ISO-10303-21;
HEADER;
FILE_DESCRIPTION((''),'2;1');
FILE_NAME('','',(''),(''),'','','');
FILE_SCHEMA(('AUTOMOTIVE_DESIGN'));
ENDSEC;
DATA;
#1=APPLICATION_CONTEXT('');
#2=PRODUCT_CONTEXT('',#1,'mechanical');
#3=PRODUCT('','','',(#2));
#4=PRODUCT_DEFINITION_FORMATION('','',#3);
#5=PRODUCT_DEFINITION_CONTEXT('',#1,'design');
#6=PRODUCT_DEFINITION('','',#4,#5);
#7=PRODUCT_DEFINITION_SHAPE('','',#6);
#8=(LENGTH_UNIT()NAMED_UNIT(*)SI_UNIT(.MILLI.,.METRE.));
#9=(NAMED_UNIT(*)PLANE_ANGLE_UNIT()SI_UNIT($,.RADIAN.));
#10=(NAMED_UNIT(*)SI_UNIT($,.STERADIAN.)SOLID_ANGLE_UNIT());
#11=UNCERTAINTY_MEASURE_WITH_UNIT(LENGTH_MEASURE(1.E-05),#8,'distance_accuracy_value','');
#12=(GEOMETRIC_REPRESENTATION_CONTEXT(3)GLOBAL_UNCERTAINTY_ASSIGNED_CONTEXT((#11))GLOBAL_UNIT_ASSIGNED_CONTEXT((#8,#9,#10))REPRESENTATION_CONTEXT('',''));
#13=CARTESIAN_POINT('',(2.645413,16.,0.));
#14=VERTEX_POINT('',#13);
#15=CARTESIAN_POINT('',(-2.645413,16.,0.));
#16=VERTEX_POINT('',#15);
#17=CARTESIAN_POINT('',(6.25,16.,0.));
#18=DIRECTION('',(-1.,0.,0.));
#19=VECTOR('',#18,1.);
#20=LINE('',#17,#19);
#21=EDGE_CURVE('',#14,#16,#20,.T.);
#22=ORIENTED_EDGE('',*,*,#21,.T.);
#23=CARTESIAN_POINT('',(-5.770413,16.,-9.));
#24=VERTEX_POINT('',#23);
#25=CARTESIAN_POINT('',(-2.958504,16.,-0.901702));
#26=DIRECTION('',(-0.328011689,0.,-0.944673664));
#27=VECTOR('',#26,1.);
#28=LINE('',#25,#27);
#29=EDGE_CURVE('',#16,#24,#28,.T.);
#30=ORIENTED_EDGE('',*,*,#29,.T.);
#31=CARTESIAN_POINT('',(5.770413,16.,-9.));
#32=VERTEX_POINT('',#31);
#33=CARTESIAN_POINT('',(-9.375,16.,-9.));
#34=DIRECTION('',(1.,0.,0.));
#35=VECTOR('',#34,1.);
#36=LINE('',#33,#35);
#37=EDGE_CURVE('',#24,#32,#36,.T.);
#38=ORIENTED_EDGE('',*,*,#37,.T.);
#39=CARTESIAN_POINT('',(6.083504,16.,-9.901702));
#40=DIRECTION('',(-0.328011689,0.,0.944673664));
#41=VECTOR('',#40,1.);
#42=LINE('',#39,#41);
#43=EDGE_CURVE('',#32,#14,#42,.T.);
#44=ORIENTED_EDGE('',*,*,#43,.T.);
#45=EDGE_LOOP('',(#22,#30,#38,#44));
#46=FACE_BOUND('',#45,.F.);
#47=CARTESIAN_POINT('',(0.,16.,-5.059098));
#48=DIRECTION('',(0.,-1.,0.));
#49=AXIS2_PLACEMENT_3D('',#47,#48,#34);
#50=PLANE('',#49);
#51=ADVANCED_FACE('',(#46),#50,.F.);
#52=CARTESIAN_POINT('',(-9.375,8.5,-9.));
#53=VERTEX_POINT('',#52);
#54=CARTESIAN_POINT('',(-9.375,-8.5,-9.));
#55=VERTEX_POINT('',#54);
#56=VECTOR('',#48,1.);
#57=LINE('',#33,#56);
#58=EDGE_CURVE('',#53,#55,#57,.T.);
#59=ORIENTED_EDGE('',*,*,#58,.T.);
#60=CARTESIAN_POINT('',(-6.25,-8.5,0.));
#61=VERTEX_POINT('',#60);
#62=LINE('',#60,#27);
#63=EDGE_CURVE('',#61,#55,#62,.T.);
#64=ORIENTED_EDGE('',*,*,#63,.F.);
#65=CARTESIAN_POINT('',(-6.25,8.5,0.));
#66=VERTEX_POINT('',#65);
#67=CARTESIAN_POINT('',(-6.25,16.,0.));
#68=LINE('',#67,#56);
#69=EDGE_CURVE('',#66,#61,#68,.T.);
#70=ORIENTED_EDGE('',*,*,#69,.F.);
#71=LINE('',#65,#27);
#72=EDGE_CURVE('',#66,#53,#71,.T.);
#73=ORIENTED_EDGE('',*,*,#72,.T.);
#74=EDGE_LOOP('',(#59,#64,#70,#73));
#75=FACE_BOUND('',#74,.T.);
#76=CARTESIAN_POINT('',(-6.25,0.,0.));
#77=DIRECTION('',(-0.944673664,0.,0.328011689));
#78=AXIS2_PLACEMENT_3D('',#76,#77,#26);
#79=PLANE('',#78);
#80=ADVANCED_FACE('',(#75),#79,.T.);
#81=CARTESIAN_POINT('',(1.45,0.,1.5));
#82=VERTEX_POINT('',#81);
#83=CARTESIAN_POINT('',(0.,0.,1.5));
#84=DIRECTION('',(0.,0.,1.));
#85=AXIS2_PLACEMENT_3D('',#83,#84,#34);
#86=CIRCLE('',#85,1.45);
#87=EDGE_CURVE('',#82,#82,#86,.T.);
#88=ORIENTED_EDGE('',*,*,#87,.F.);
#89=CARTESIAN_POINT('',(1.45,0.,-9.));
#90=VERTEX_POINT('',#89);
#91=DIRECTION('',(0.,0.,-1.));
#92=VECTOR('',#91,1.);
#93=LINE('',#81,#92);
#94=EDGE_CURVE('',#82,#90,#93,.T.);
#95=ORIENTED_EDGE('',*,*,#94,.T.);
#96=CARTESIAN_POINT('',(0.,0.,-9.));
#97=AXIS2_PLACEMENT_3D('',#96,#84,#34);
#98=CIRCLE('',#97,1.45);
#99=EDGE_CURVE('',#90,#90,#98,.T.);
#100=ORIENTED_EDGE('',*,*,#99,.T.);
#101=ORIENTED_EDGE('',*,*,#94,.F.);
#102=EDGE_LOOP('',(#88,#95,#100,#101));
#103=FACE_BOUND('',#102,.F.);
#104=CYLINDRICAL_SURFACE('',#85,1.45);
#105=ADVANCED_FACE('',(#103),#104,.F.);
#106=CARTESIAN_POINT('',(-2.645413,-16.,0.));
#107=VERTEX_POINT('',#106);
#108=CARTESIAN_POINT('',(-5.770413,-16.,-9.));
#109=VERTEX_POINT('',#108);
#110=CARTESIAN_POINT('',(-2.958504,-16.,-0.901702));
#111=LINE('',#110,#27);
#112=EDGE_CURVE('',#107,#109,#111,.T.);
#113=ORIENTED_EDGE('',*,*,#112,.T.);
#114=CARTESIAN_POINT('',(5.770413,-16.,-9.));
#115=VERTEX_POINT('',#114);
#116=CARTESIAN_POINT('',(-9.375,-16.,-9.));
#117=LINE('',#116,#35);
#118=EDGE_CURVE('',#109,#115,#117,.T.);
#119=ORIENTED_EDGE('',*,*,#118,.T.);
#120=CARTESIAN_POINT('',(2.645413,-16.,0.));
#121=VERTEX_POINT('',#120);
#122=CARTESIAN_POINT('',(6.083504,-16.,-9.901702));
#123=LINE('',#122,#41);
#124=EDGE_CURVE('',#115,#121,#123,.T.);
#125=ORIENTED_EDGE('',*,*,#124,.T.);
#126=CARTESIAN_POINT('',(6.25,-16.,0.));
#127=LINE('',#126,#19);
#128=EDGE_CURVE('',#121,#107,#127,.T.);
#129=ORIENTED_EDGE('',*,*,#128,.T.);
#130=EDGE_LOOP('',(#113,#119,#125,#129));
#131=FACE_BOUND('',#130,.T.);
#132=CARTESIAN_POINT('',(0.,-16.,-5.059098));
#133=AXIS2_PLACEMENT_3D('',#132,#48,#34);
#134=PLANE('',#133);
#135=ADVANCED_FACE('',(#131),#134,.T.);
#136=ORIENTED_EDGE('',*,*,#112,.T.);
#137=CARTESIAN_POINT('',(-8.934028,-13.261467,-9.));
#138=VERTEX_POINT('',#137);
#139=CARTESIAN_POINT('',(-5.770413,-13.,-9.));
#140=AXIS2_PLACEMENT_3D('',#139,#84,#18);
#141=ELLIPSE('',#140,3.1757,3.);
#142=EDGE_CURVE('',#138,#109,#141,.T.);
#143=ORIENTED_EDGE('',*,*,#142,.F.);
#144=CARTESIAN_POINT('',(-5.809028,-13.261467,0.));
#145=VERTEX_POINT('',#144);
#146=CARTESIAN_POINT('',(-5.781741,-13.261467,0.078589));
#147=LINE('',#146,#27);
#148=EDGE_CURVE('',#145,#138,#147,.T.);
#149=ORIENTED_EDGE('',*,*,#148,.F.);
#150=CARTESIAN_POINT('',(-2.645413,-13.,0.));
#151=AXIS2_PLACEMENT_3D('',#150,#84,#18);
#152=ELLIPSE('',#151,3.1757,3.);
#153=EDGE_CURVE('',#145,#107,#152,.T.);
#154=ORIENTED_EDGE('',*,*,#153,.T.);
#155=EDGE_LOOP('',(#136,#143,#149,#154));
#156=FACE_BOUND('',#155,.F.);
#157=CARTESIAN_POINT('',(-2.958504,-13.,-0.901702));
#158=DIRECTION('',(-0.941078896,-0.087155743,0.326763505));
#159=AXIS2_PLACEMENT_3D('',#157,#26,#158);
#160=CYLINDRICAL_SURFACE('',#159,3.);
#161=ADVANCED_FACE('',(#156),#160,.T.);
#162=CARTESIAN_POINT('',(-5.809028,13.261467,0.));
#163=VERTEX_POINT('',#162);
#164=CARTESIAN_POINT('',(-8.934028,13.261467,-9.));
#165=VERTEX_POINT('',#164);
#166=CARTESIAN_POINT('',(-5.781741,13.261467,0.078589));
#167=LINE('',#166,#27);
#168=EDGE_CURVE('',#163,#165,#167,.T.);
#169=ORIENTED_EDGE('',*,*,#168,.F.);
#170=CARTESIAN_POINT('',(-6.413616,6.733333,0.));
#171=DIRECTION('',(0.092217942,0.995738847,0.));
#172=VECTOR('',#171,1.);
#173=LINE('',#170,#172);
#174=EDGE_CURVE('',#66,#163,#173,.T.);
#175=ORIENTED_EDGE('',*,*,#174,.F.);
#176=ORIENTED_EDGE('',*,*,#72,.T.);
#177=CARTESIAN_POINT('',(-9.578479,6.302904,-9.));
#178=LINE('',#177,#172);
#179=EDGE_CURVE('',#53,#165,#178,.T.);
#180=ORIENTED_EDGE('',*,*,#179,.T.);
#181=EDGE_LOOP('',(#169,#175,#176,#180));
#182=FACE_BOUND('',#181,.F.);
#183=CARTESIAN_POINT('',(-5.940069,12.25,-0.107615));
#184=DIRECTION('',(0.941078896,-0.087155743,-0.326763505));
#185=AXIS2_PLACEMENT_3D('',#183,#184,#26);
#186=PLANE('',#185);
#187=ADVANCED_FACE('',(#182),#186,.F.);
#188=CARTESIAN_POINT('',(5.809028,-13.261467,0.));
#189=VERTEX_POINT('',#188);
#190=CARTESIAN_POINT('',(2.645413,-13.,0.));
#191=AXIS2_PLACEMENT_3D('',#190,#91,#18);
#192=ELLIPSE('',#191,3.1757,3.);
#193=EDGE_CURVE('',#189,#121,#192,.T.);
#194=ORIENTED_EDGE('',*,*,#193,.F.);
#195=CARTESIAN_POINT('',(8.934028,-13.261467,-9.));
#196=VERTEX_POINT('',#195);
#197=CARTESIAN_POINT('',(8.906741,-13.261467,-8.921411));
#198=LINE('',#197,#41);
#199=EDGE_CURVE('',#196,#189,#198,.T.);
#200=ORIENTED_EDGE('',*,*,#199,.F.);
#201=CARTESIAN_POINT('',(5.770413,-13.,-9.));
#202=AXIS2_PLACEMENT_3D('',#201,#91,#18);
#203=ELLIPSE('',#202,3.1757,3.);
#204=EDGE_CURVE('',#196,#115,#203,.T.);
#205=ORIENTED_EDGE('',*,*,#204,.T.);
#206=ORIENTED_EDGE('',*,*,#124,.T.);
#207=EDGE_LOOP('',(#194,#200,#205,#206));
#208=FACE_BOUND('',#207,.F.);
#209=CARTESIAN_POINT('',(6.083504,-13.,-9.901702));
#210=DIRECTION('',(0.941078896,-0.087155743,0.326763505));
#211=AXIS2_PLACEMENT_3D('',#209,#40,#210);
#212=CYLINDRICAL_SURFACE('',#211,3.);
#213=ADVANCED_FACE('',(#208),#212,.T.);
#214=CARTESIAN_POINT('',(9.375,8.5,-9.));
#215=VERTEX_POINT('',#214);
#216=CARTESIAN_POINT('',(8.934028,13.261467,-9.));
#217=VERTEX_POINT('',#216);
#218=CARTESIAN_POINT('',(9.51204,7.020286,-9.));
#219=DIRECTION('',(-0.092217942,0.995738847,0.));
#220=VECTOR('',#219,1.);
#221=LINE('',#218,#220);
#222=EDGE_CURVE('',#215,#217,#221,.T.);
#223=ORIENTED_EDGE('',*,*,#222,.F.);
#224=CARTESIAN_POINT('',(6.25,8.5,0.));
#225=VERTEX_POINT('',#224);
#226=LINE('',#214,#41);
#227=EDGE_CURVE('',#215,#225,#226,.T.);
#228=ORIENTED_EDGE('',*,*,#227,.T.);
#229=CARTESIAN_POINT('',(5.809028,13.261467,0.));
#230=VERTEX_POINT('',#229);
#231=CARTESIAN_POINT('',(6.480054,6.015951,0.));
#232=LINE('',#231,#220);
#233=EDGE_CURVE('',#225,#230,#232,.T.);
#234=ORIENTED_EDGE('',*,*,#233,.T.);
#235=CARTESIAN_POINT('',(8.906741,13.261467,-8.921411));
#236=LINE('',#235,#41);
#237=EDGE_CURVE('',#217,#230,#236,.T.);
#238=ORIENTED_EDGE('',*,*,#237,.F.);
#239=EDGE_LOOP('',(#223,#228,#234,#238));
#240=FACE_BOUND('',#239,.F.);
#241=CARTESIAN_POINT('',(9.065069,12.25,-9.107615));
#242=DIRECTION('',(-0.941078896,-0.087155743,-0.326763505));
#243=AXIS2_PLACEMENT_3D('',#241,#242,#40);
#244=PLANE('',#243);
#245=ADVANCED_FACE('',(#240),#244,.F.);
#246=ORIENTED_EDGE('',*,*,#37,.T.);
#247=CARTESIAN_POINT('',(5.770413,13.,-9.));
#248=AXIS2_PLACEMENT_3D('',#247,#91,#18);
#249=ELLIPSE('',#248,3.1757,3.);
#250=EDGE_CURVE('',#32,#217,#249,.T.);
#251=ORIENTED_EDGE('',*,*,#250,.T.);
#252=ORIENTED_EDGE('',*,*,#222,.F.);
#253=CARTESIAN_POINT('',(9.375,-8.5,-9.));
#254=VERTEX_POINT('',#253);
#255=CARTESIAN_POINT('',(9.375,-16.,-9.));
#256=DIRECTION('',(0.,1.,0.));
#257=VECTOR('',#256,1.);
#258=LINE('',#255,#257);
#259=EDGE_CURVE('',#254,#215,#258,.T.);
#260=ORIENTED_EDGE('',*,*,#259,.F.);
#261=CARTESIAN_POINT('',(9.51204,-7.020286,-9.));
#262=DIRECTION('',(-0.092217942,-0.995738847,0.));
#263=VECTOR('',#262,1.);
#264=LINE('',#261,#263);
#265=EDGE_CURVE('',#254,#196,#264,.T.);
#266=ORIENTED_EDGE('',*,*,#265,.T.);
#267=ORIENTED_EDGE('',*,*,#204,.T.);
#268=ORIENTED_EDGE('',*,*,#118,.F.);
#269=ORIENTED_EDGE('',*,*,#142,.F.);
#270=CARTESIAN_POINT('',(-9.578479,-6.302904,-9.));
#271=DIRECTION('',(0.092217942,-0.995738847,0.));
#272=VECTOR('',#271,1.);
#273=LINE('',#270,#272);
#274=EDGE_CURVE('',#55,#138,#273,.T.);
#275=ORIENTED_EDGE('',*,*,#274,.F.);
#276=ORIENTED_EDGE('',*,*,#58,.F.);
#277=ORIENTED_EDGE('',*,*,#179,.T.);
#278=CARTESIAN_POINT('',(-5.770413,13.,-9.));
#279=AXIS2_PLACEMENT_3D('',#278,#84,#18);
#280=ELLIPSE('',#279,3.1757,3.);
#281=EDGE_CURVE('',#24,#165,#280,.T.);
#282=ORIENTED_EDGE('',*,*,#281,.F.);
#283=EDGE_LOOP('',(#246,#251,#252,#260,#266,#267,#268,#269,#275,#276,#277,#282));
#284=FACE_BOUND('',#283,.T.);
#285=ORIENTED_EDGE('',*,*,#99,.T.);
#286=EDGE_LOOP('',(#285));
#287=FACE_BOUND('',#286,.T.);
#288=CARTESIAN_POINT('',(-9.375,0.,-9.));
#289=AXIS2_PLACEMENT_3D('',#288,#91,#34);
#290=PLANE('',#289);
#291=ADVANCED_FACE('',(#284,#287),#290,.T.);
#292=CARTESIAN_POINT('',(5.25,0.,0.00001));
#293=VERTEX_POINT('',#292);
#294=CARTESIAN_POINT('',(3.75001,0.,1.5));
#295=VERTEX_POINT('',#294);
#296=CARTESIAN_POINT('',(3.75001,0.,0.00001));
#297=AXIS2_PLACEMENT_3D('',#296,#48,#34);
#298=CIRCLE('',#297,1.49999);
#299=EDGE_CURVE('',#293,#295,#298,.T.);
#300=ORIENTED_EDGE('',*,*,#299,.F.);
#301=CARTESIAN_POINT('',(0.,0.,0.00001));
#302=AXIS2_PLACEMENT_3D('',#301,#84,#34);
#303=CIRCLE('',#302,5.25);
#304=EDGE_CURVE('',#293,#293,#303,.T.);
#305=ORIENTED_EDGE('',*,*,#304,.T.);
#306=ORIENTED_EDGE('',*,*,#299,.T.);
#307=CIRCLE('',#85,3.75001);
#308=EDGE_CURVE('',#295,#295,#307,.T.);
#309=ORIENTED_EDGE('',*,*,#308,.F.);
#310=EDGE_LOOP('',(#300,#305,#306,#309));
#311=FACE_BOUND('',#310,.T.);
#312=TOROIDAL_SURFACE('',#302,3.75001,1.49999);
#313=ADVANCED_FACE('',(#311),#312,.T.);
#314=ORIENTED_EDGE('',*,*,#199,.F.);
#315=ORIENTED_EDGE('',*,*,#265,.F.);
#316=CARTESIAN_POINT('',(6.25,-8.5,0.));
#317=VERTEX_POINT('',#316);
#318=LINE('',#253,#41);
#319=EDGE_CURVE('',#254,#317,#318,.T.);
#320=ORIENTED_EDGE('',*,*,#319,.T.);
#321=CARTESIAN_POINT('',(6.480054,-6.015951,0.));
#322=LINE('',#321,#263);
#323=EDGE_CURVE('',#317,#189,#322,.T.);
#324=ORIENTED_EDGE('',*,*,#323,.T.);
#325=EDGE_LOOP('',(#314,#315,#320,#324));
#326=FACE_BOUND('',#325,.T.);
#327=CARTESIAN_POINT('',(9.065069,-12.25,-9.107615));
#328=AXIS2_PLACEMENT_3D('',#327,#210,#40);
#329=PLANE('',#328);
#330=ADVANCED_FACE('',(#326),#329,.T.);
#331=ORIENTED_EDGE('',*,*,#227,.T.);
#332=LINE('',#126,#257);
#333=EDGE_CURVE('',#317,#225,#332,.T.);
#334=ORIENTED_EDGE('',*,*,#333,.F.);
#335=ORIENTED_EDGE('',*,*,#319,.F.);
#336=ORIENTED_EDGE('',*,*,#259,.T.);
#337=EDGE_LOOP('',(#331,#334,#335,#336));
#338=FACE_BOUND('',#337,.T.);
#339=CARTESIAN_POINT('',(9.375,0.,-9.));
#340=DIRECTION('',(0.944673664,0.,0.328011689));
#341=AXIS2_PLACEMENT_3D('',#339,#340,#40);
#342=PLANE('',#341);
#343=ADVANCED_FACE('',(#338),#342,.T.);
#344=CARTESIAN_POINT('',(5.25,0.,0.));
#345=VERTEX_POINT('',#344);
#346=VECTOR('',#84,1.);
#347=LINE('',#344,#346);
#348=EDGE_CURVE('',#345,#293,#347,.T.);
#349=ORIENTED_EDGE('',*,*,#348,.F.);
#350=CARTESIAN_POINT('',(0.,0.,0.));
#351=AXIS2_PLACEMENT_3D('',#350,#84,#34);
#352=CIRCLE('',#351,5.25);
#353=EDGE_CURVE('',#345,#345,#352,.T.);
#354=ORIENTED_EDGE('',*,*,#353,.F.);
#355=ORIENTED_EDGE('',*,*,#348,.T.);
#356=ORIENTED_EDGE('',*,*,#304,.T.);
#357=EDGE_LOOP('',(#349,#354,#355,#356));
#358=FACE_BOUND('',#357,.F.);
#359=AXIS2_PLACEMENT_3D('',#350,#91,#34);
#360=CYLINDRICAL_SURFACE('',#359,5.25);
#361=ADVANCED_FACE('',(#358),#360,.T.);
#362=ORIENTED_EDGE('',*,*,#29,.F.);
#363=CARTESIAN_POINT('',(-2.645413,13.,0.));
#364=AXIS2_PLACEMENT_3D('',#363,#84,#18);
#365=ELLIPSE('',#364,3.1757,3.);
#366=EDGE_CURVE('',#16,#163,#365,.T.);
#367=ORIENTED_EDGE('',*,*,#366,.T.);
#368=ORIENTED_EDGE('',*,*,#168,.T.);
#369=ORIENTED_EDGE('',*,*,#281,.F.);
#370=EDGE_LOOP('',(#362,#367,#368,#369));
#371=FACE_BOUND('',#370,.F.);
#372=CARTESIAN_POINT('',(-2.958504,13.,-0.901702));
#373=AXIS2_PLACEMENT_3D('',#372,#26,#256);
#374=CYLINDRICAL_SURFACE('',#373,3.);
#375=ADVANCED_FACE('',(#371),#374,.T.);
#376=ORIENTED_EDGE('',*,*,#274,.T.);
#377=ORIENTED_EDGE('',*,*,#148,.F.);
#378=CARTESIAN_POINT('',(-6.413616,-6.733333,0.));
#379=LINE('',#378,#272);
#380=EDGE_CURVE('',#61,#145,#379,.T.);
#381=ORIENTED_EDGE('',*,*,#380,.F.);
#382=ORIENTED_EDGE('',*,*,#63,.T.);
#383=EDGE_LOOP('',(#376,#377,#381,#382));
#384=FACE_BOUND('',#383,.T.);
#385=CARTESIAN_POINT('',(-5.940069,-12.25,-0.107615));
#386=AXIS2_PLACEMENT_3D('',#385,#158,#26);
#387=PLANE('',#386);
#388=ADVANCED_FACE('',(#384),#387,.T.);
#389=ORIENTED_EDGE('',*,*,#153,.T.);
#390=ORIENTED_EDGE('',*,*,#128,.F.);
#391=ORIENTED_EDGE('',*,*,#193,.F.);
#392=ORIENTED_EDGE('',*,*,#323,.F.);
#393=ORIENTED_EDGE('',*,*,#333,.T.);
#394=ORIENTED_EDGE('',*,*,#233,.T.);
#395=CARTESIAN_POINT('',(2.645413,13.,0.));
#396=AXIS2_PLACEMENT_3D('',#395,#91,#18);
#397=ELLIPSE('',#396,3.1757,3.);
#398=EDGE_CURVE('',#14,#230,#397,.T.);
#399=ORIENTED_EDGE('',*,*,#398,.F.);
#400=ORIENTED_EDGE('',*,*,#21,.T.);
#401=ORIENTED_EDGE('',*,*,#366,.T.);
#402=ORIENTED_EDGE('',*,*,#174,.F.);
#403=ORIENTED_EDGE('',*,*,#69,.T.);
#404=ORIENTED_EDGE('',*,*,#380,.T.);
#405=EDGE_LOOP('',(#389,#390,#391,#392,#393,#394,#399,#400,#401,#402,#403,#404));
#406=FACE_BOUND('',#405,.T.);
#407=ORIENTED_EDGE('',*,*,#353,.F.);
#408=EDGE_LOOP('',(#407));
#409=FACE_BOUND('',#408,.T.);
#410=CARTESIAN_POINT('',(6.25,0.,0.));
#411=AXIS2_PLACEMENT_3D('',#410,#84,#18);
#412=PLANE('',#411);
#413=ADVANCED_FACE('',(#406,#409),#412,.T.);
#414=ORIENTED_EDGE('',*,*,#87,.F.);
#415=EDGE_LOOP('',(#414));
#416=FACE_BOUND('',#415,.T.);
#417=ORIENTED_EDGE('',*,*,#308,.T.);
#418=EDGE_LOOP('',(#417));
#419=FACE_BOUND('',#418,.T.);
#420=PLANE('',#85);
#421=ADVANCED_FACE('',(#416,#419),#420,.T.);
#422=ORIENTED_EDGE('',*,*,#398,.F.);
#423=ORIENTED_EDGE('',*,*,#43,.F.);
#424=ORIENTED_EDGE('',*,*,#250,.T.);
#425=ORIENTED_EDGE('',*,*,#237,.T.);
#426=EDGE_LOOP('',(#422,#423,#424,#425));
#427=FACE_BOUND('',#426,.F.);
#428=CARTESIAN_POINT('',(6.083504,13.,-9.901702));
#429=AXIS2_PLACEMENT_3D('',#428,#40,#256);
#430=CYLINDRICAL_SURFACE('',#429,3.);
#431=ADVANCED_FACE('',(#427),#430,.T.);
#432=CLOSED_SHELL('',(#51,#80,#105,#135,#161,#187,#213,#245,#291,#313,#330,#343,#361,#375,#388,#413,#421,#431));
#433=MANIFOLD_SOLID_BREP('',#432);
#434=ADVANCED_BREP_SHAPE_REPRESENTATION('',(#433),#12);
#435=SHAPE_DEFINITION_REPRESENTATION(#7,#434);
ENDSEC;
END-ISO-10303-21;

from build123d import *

# Parameters (mm, degrees)
F1_DEPTH   = 16
F2_R       = 5.25
F3_DEPTH   = 1.5
F4_R       = 1.45
F5_DEPTH   = 12
F6_SIZE2   = 0.6561649764
F6_SIZE    = 7.5
F6_2_SIZE2 = 0.6561649764
F6_2_SIZE  = 7.5
F7_R       = 3
F8_R       = 1.49999


# Not quite as in the source:
# - a fillet or chamfer is up to 0.001 mm smaller than in the source, because OpenCascade refuses the exact size


with BuildPart() as f1:
    # F0 (on Front) → F1 (new body, symmetric)
    with BuildSketch(Plane.XZ):
        Polygon((6.25, 0), (0, 0), (-6.25, 0), (-9.375, -9), (0, -9), (9.375, -9), align=None)
    extrude(amount=F1_DEPTH, both=True)

    # F2 (on face) → F3 (join)
    with BuildSketch(Plane.XY):
        Circle(F2_R)
    extrude(amount=F3_DEPTH)

    # F4 (on face) → F5 (cut)
    with BuildSketch(Plane.XY.offset(1.5)):
        Circle(F4_R)
    extrude(amount=-F5_DEPTH, mode=Mode.SUBTRACT)

    # F6
    f6_edges = [f1.edges().sort_by_distance(p)[0] for p in [
        (7.8125, -16, -4.5),
        (7.8125, 16, -4.5),
    ]]
    f6_side = f1.faces().sort_by_distance((7.8125, 0, -4.5))[0]
    chamfer(f6_edges, length=F6_SIZE, length2=F6_SIZE2, reference=f6_side)

    # F6#2
    f6_2_edges = [f1.edges().sort_by_distance(p)[0] for p in [
        (-7.8125, -16, -4.5),
        (-7.8125, 16, -4.5),
    ]]
    f6_2_side = f1.faces().sort_by_distance((-7.8125, 0, -4.5))[0]
    chamfer(f6_2_edges, length=F6_2_SIZE, length2=F6_2_SIZE2, reference=f6_2_side)

    # F7
    f7_edges = [f1.edges().sort_by_distance(p)[0] for p in [
        (7.117906, -16, -4.5),
        (-7.117906, -16, -4.5),
        (7.117906, 16, -4.5),
        (-7.117906, 16, -4.5),
    ]]
    fillet(f7_edges, radius=F7_R)

    # F8 (radius 1.5 in the source; OpenCascade refuses exactly that, so slightly less here)
    f8_edges = [f1.edges().sort_by_distance(p)[0] for p in [
        (-5.25, 0, 1.5),
    ]]
    fillet(f8_edges, radius=F8_R)


solid = f1.part
